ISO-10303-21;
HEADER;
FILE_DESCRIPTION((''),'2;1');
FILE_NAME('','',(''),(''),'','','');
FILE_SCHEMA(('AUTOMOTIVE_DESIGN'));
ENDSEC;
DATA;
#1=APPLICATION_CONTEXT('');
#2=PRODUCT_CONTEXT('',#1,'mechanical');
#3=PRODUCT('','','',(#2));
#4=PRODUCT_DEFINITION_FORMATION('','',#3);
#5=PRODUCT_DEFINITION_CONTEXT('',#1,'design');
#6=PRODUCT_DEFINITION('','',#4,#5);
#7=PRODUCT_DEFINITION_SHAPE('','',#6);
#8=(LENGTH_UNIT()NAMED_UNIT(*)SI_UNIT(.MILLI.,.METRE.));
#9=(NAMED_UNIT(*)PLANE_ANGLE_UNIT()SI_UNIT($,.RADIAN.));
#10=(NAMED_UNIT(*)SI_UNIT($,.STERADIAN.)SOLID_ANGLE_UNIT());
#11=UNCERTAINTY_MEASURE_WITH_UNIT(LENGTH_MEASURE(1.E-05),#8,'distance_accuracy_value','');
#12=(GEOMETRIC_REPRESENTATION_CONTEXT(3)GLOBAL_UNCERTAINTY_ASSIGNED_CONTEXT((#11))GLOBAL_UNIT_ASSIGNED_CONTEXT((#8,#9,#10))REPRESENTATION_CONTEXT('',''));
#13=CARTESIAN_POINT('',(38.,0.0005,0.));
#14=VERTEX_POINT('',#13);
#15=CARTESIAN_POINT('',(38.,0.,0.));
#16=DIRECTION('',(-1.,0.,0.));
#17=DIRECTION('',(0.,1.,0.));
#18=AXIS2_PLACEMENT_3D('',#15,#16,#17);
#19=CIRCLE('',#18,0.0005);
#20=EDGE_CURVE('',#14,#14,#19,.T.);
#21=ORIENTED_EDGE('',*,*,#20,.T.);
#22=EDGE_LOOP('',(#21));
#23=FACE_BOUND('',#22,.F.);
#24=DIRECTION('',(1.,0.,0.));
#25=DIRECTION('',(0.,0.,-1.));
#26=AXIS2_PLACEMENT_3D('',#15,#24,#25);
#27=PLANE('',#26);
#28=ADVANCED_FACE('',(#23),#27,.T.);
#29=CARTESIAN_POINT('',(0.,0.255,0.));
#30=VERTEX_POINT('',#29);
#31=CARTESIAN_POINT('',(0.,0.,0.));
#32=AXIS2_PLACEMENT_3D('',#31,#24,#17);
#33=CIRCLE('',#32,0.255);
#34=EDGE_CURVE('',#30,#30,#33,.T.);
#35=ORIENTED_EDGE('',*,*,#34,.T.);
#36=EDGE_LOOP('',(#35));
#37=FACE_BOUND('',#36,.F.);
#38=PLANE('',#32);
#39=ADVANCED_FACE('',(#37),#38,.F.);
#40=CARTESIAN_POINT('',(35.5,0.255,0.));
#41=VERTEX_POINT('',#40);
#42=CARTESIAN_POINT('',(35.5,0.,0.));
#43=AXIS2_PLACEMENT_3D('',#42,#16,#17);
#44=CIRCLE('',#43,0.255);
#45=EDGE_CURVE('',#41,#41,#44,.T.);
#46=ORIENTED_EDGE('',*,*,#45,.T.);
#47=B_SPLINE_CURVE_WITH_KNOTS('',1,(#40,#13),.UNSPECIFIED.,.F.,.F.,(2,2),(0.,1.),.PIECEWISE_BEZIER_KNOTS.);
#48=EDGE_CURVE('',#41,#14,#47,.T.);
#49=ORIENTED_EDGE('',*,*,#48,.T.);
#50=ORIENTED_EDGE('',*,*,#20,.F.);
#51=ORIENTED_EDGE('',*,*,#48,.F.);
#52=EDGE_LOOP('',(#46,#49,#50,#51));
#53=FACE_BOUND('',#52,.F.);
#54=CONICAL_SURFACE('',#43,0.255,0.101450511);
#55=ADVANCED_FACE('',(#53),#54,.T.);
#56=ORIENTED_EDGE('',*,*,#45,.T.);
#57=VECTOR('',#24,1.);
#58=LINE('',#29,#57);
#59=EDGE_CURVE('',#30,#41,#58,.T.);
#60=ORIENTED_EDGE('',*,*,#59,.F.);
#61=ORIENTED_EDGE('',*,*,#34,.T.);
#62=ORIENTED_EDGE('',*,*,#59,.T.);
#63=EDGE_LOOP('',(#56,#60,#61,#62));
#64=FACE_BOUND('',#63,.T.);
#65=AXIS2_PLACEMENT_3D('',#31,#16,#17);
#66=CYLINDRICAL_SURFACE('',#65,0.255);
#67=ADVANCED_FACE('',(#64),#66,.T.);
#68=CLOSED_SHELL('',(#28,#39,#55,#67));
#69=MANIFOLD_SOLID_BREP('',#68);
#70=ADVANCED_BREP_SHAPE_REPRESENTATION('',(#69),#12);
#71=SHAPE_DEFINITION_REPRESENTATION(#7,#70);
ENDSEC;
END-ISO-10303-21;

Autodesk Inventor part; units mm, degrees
ref_plane "YZ Plane" through (0, 0, 0) normal (1, 0, 0) x (0, 1, 0)
ref_plane "XZ Plane" through (0, 0, 0) normal (0, 1, 0) x (-1, 0, 0)
ref_plane "XY Plane" through (0, 0, 0) normal (0, 0, 1) x (1, 0, 0)
sketch "Sketch1" plane through (0, 0, 0) normal (1, 0, 0) x (0, 1, 0)
  circle A0 centre (0, 0) radius 0.255
  dimension "d0" = 0.51
extrude "Extrusion1" add sketch "Sketch1" along normal blind 35.5
ref_plane "Work Plane1" through (38, 0, 0) normal (1, 0, 0) x (0, 0, -1)
sketch "Sketch2" plane through (38, 0, 0) normal (1, 0, 0) x (0, 0, -1)
  circle A0 centre (0, 0) radius 0.0005
  dimension "d4" = 0.001
loft "Loft1" add profiles "Sketch2" section 1 edges at (35.5, -0.255, 0)
properties part number "Probe"
